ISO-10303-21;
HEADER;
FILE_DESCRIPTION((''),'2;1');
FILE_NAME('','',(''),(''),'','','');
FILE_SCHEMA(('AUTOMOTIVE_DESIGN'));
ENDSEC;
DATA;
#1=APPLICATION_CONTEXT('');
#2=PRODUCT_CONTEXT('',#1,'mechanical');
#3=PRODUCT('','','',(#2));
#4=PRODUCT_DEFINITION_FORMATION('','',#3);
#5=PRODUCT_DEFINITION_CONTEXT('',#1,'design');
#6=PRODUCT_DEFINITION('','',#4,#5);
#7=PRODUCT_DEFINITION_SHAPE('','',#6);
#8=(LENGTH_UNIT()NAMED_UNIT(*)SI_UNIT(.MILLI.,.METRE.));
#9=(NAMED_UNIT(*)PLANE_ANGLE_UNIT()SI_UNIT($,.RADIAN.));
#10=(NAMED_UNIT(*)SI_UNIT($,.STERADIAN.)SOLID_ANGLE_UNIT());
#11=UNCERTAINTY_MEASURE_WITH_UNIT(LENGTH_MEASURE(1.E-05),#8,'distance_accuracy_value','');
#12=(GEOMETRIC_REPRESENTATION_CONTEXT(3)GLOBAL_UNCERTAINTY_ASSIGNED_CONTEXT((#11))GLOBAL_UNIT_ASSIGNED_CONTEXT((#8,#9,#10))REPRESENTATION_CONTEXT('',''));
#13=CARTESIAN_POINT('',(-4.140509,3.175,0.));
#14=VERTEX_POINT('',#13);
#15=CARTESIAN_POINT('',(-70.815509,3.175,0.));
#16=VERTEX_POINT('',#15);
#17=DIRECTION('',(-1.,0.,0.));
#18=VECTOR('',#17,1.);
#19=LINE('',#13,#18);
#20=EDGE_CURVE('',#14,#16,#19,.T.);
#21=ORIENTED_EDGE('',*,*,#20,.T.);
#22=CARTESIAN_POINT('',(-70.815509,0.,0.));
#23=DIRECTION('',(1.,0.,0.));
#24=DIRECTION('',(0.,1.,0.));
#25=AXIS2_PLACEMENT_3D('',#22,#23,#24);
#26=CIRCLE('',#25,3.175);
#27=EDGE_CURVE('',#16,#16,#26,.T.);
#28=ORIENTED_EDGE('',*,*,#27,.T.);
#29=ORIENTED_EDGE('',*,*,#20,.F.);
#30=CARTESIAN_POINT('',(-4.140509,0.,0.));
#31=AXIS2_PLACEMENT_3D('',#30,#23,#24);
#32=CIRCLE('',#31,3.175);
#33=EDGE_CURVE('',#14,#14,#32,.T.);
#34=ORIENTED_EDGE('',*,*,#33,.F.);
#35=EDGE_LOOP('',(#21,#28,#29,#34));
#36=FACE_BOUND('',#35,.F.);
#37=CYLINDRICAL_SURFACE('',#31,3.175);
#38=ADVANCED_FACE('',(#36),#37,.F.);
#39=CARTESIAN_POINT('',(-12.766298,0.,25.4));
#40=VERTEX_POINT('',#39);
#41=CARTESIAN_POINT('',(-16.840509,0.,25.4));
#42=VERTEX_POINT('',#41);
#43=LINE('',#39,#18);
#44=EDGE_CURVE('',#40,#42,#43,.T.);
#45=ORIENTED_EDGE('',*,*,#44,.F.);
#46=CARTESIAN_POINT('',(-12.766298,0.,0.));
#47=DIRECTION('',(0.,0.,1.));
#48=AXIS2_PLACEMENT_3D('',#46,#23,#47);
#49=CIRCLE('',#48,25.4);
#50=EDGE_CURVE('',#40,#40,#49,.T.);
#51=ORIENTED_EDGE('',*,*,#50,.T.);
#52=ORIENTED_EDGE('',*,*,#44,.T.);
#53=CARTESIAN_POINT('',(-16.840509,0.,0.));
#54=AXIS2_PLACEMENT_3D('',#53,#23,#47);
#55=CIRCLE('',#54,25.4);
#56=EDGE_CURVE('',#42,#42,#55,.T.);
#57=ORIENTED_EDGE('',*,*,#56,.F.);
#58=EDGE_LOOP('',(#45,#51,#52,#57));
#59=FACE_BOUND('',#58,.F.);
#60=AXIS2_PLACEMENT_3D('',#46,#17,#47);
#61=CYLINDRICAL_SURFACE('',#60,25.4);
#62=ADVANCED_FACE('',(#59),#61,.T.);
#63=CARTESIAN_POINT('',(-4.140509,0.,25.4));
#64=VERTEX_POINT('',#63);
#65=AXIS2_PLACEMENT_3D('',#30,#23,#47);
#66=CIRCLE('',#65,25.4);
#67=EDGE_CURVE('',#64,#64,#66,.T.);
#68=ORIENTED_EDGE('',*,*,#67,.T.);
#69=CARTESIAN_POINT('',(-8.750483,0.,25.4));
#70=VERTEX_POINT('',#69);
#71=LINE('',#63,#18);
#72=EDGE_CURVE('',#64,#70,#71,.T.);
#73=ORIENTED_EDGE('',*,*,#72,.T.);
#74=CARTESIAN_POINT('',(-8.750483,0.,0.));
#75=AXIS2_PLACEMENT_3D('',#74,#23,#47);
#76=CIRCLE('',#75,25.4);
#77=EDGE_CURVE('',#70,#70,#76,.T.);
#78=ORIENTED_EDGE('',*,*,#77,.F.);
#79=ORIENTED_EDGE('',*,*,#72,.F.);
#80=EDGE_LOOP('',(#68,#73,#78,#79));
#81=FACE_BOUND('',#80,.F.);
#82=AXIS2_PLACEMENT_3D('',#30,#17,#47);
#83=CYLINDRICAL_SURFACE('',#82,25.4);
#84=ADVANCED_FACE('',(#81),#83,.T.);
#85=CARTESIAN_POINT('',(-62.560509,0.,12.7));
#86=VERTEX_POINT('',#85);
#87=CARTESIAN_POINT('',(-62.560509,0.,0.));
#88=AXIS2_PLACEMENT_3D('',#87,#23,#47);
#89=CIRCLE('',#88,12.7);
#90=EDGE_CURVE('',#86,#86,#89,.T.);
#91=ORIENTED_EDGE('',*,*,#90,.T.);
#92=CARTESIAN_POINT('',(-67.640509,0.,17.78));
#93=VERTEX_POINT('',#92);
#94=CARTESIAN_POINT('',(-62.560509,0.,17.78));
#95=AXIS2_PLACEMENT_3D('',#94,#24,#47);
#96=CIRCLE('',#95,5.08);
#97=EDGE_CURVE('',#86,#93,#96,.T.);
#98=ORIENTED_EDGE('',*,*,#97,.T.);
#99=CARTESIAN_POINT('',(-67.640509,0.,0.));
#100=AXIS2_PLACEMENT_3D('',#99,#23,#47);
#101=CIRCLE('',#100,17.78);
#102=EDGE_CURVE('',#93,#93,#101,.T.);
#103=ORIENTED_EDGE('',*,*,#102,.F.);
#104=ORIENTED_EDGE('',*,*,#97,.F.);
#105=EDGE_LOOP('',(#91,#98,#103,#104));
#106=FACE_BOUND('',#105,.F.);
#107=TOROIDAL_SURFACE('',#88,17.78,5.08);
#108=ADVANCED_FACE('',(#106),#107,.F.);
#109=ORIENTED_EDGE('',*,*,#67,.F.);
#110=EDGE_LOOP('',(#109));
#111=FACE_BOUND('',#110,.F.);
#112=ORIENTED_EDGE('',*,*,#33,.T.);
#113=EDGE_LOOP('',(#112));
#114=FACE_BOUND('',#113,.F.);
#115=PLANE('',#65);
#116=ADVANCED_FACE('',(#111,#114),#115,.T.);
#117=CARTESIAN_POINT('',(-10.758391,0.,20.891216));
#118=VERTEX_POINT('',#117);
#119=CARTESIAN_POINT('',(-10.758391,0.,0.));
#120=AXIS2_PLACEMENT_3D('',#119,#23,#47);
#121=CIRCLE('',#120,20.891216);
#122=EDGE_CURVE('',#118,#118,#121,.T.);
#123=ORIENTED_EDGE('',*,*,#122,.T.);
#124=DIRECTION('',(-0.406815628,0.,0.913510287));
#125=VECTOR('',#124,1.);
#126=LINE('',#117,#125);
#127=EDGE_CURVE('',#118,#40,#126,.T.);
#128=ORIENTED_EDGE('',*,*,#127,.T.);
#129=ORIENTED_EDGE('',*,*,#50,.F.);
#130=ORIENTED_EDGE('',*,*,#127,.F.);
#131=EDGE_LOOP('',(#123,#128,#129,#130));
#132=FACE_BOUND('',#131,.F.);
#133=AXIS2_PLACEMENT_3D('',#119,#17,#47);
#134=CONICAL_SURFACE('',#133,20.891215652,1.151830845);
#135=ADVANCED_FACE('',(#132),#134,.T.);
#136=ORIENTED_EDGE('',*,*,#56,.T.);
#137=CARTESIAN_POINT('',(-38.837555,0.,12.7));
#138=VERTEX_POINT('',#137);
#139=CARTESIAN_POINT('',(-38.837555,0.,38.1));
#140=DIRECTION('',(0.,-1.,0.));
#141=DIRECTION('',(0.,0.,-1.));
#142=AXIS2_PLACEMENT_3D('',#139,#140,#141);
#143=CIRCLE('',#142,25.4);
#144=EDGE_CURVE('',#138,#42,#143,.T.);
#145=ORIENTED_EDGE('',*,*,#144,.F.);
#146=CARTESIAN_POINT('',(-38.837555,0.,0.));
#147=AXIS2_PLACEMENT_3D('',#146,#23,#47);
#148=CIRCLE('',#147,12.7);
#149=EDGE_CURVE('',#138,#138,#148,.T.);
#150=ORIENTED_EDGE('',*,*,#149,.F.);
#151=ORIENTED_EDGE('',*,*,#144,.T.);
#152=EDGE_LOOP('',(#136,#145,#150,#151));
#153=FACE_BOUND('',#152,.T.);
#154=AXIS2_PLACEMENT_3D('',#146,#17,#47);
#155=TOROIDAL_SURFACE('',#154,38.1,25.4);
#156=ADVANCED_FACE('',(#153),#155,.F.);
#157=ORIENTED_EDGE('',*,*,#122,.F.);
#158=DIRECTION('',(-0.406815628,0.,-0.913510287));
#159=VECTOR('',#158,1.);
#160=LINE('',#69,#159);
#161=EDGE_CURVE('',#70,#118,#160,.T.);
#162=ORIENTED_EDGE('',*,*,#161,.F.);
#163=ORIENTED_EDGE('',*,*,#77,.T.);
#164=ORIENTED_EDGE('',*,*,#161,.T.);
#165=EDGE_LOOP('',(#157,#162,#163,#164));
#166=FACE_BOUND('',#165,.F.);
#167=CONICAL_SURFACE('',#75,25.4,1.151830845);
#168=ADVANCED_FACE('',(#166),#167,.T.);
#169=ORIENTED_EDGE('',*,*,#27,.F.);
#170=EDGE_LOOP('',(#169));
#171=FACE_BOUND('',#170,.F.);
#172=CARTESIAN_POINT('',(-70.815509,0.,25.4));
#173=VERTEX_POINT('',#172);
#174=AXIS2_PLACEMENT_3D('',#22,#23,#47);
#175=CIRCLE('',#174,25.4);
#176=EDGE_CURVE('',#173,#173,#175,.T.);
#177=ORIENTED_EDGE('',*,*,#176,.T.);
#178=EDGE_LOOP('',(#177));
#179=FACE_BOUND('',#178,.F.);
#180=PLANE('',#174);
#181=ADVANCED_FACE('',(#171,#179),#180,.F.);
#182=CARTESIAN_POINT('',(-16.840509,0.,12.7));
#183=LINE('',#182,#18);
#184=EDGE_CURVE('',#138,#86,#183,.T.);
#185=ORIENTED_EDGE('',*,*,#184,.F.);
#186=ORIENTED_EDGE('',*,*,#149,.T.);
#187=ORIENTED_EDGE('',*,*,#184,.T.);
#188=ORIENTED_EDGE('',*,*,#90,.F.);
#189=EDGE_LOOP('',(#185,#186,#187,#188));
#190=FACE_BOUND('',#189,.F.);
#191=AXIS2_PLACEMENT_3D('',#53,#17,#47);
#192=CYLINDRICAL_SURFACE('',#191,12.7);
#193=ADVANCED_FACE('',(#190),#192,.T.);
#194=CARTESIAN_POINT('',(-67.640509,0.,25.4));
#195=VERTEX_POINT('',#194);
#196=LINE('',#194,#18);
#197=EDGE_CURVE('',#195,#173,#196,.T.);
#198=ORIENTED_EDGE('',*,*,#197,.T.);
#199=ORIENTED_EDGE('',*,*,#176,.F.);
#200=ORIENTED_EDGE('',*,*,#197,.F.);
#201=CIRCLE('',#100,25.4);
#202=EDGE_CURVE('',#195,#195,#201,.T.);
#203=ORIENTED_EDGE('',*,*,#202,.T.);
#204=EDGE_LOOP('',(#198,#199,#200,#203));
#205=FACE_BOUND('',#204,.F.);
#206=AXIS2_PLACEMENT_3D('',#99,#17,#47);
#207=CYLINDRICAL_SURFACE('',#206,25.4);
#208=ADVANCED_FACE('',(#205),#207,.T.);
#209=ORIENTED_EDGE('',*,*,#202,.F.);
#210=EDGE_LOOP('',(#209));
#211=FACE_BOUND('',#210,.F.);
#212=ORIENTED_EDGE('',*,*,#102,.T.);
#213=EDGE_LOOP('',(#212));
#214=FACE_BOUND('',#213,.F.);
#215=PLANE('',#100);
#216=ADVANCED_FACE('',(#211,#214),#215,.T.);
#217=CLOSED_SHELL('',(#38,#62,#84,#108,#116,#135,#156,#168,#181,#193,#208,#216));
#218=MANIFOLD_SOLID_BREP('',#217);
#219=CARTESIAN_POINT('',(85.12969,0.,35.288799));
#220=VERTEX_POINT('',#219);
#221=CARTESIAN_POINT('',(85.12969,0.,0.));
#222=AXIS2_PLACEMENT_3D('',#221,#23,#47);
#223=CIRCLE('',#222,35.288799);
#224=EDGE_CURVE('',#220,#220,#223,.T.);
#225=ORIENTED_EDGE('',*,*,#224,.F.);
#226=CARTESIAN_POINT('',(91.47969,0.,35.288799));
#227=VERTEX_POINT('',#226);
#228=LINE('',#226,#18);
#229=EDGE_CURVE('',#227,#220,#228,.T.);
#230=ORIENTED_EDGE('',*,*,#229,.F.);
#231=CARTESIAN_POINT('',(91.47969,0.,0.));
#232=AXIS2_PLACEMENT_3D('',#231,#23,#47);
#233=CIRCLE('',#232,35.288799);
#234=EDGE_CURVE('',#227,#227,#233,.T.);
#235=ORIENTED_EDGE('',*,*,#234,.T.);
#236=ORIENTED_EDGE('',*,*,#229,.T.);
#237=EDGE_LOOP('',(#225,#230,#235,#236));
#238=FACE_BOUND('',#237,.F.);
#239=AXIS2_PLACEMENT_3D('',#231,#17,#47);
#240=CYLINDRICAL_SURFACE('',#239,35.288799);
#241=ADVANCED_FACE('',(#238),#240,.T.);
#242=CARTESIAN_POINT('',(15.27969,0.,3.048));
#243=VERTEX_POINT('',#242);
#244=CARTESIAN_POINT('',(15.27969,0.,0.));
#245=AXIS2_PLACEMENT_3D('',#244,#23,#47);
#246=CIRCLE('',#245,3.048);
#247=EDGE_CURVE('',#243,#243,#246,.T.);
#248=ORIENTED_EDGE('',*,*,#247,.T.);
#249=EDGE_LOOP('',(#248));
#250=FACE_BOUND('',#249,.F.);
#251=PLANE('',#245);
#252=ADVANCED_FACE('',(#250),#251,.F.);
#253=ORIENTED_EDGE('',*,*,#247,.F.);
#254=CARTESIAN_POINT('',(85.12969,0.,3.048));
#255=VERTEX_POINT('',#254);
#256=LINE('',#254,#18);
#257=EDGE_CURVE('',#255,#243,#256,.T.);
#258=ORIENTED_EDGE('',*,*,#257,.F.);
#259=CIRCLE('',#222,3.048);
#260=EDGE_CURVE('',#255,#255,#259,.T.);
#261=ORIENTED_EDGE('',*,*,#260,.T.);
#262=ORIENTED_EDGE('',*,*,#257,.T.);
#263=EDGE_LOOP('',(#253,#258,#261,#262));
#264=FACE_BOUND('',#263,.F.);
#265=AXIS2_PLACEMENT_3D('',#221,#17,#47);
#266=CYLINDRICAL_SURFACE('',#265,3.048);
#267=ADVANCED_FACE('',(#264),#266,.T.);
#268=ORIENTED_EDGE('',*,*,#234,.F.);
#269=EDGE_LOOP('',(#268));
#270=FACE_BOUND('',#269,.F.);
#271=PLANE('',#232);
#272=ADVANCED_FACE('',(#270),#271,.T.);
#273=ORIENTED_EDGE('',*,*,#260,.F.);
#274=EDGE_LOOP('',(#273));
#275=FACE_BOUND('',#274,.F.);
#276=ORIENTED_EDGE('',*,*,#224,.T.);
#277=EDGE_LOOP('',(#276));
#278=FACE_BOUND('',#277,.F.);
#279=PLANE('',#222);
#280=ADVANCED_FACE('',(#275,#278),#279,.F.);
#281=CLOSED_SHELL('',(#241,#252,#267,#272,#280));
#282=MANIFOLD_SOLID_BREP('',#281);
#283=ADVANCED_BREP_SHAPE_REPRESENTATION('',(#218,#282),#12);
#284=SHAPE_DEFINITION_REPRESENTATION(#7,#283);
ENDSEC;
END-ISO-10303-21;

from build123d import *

# Parameters (mm, degrees)
F3_R     = 3.175
F4_DEPTH = 66.676
F5_R     = 5.08


# Not quite as in the source:
# - a fillet or chamfer that OpenCascade refuses, or shapes differently, is made with other operations: its cross-section is extruded or revolved along the edge and cut away or added


with BuildPart() as f1:
    # F0 (on Front) → F1 (revolve)
    with BuildSketch(Plane.XZ):
        Polygon((-70.8155093496, 25.4), (-70.8155093496, 0), (-4.1405093496, 0), (-4.1405093496, 25.4), (-8.7504833937, 25.4), (-10.7583906502, 20.8912156522), (-12.7662979066, 25.4), (-16.8405093496, 25.4), (-16.8405093496, 12.7), (-67.6405093496, 12.7), (-67.6405093496, 25.4), align=None)
    revolve(axis=Axis((-2.6019513607, 0, 0), (1, 0, 0)))

    # F2: fillet of radius 25.4 on 1 edges, made by hand

    # F2_s1 → F2_t2 (revolve)
    with BuildSketch(Plane.XZ):
        with BuildLine():
            ThreePointArc((-38.8375546057, 12.7), (-26.1375546057, 16.1029547439), (-16.8405093496, 25.4))
            Line((-16.8405093496, 25.4), (-16.4005684445, 25.146))
            ThreePointArc((-16.4005684445, 25.146), (-16.3325093496, 19.05), (-16.3325093496, 12.7))
            Line((-16.3325093496, 12.7), (-16.8405093496, 12.192))
            Line((-16.8405093496, 12.192), (-38.8375546057, 12.192))
            Line((-38.8375546057, 12.192), (-38.8375546057, 12.7))
        make_face()
    revolve(axis=Axis((-16.8405093496, 0, 0), (1, 0, 0)))

    # F3 (on face) → F4 (cut, through all)
    with BuildSketch(Plane.YZ.offset(-4.1405093496)):
        Circle(F3_R)
    extrude(amount=-F4_DEPTH, mode=Mode.SUBTRACT)

    # F5
    f5_edges = [f1.edges().sort_by_distance(p)[0] for p in [
        (-67.640509, 0, -12.7),
    ]]
    fillet(f5_edges, radius=F5_R)


with BuildPart() as f7:
    # F6 (on Front) → F7 (revolve)
    with BuildSketch(Plane.XZ):
        Polygon((15.2796903457, 3.048), (15.2796903457, 0), (91.4796903457, 0), (91.4796903457, 35.2887990795), (85.1296903457, 35.2887990795), (85.1296903457, 3.048), align=None)
    revolve(axis=Axis((53.1151062219, 0, 0), (1, 0, 0)))


solid = Compound([f1.part, f7.part])
